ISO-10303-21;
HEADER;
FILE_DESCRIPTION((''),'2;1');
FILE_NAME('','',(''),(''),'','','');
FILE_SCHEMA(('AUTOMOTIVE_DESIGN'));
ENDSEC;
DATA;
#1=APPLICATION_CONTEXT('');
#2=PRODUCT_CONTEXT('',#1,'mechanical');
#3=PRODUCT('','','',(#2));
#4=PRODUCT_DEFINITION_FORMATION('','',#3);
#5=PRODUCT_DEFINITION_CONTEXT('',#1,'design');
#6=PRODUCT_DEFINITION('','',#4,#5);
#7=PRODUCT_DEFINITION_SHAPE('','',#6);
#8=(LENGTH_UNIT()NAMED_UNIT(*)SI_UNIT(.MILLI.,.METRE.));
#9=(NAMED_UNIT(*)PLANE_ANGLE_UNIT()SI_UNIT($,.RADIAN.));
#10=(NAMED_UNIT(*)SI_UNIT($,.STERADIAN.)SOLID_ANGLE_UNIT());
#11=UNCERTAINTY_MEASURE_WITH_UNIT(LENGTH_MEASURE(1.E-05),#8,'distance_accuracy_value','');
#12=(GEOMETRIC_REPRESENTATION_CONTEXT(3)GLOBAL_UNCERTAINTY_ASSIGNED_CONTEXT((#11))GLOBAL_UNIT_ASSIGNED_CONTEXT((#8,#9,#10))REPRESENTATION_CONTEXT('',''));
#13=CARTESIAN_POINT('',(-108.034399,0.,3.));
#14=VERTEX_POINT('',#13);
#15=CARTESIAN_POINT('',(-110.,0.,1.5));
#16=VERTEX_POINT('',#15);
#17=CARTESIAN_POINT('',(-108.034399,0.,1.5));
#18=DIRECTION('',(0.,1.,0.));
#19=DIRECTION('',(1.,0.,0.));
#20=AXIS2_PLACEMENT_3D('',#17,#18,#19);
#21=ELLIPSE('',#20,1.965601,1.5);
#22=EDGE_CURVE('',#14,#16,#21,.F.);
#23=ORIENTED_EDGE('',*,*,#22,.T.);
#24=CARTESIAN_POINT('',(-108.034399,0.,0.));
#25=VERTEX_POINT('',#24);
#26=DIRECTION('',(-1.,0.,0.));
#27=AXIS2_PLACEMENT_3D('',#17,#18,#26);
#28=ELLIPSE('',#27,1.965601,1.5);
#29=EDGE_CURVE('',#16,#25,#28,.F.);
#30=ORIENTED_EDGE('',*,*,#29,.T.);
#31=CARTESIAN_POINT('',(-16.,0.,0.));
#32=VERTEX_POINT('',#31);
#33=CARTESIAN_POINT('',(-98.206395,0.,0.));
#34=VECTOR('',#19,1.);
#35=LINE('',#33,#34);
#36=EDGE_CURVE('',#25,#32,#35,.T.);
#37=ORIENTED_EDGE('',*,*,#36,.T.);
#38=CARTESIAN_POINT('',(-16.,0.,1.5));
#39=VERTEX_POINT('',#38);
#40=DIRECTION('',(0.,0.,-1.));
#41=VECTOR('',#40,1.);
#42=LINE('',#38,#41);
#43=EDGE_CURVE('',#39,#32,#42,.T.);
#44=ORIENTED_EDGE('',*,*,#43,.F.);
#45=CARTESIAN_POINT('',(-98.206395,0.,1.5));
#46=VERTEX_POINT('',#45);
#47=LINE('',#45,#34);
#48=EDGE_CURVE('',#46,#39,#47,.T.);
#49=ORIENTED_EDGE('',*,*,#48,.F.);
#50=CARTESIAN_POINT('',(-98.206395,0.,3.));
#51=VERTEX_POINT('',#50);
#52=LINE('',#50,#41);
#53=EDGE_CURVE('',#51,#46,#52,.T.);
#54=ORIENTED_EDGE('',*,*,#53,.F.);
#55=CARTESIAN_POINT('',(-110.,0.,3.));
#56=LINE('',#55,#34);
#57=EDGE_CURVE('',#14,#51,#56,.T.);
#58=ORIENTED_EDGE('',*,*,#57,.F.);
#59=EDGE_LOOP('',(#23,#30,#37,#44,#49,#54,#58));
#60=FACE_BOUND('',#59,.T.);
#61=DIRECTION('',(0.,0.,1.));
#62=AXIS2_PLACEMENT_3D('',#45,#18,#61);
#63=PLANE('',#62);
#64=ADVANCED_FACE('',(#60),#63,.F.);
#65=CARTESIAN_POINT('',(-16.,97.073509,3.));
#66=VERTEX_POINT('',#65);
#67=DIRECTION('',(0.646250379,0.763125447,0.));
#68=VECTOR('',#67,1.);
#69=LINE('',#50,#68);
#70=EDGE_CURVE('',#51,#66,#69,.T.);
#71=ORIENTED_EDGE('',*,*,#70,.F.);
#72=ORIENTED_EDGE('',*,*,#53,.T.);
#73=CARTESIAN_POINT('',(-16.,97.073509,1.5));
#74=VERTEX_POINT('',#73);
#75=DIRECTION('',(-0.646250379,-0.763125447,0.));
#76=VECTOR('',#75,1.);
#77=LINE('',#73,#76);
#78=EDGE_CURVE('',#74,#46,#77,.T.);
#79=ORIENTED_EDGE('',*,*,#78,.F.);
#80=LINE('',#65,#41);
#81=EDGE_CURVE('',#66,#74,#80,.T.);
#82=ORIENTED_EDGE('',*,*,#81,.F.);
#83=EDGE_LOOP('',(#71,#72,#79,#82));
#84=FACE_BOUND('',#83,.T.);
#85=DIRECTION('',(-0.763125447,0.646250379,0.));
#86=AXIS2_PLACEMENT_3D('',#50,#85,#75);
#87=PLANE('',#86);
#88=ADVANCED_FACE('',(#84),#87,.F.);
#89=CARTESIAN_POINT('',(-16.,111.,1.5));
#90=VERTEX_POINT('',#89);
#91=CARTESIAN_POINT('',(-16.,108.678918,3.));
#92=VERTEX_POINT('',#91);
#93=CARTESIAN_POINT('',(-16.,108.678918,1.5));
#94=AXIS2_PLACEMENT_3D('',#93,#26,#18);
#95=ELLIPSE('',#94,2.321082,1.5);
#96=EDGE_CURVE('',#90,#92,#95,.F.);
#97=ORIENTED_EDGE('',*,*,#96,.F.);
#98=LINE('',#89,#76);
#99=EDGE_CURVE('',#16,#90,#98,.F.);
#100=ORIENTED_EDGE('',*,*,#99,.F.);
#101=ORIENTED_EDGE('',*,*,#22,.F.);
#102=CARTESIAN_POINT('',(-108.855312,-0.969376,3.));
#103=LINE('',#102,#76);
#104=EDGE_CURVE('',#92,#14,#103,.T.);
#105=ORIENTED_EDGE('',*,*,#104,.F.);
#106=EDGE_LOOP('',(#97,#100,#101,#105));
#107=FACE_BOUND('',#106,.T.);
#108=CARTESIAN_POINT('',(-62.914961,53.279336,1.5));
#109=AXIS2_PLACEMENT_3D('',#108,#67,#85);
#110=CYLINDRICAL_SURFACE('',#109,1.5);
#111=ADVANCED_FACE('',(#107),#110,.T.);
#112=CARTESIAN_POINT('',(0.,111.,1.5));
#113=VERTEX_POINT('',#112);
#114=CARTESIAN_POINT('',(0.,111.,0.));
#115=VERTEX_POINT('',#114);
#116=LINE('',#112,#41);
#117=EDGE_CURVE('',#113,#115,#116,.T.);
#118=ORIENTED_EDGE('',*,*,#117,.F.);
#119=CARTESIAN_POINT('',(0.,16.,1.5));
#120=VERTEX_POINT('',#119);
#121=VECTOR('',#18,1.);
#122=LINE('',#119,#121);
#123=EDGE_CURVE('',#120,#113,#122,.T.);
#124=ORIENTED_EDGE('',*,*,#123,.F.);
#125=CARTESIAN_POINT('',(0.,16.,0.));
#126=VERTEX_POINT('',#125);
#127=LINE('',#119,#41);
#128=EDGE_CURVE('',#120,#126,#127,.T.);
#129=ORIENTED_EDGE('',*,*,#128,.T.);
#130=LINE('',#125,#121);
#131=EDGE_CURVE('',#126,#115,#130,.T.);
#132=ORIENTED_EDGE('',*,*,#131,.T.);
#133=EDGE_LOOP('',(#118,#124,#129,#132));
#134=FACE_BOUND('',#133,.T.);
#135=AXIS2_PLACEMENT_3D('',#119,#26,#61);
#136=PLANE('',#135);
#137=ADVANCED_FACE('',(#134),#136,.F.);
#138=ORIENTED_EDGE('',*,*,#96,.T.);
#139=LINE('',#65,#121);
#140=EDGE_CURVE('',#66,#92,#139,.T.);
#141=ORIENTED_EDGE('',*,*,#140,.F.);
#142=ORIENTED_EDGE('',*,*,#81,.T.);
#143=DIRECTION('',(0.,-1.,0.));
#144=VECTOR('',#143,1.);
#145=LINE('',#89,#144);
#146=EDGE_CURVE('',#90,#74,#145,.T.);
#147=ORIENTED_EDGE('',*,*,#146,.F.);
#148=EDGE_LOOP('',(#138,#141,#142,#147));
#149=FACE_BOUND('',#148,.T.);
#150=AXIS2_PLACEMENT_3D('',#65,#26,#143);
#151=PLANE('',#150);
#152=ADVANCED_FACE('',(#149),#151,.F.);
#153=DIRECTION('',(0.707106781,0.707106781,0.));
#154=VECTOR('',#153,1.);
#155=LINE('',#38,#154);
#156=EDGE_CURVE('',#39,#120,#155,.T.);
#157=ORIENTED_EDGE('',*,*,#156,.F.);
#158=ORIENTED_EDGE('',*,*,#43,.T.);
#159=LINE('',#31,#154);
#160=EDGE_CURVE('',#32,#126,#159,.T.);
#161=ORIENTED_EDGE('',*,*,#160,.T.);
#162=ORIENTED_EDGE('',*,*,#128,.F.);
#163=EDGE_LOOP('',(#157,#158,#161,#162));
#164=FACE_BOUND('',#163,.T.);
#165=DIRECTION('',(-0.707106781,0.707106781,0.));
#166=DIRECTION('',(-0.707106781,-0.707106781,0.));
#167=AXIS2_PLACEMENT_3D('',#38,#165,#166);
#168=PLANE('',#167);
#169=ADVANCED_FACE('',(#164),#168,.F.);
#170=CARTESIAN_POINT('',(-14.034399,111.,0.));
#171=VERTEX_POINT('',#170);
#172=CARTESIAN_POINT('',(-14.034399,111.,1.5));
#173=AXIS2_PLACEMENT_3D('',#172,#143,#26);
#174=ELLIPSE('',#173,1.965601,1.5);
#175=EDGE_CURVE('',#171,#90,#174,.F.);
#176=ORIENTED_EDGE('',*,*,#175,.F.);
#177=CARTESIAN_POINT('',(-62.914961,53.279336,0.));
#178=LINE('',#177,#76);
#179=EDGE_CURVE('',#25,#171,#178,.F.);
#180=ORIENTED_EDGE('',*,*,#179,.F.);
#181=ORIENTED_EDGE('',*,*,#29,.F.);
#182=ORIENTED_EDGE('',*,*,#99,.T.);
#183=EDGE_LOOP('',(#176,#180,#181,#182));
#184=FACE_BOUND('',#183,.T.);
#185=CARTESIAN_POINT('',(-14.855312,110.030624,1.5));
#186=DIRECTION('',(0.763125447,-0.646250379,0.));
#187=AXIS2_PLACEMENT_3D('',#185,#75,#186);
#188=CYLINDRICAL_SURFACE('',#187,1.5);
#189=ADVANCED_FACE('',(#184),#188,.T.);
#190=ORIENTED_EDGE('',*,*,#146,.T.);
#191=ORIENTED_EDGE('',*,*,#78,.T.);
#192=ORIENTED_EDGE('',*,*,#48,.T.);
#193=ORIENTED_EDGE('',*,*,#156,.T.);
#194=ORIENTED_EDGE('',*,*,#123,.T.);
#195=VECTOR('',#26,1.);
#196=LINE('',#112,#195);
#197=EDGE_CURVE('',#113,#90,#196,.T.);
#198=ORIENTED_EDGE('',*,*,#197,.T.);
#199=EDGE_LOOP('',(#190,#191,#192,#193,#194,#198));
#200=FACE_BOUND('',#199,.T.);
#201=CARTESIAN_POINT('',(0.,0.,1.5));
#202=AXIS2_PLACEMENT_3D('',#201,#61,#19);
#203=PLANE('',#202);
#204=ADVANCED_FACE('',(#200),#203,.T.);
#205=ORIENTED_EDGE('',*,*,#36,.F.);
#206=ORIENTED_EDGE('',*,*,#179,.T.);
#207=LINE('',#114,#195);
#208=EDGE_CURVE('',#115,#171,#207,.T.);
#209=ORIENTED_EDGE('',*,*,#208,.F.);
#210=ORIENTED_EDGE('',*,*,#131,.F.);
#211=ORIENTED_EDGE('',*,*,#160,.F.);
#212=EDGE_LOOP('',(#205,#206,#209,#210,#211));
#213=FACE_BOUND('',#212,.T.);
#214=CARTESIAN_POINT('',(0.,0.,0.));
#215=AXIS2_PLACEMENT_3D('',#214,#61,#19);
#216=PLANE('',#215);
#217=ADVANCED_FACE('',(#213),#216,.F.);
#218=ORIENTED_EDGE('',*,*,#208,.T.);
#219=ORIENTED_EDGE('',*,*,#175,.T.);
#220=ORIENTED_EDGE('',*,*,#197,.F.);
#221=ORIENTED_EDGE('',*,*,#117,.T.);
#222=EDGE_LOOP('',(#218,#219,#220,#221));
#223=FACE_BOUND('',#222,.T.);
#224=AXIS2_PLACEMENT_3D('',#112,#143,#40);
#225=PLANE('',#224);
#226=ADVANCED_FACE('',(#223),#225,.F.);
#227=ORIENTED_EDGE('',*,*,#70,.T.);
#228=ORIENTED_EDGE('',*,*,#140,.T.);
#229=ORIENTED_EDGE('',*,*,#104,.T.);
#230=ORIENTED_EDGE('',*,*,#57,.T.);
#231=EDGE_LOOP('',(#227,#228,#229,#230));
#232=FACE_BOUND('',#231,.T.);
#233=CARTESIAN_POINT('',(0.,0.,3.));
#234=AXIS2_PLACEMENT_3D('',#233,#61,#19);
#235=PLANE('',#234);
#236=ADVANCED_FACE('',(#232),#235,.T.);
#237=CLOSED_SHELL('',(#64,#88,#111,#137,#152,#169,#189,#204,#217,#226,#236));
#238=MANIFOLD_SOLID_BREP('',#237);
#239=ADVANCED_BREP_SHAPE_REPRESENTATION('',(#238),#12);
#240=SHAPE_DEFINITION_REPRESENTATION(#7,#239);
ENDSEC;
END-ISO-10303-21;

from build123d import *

# Parameters (mm, degrees)
EXTRUDE_1_DEPTH = 1.5
EXTRUDE_2_DEPTH = 3
FILLET_1_R      = 1.5


with BuildPart() as part:
    # 草圖1 → 擠出1 (new body)
    with BuildSketch(Plane.XY):
        Polygon((-16, 0), (0, 16), (0, 111), (-16, 111), (-16, 97.073509127), (-98.206395117, 0), align=None)
    extrude(amount=EXTRUDE_1_DEPTH)

    # 草圖2 → 擠出2 (add)
    with BuildSketch(Plane.XY):
        Polygon((-110, 0), (-98.206395117, 0), (-16, 97.073509127), (-16, 111), align=None)
    extrude(amount=EXTRUDE_2_DEPTH)

    # 圓角1
    fillet_1_edges = [part.edges().sort_by_distance(p)[0] for p in [
        (-63, 55.5, 0),
        (-63, 55.5, 3),
    ]]
    fillet(fillet_1_edges, radius=FILLET_1_R - 0.0001)  # a hair under: the kernel refuses the full size


solid = part.part
